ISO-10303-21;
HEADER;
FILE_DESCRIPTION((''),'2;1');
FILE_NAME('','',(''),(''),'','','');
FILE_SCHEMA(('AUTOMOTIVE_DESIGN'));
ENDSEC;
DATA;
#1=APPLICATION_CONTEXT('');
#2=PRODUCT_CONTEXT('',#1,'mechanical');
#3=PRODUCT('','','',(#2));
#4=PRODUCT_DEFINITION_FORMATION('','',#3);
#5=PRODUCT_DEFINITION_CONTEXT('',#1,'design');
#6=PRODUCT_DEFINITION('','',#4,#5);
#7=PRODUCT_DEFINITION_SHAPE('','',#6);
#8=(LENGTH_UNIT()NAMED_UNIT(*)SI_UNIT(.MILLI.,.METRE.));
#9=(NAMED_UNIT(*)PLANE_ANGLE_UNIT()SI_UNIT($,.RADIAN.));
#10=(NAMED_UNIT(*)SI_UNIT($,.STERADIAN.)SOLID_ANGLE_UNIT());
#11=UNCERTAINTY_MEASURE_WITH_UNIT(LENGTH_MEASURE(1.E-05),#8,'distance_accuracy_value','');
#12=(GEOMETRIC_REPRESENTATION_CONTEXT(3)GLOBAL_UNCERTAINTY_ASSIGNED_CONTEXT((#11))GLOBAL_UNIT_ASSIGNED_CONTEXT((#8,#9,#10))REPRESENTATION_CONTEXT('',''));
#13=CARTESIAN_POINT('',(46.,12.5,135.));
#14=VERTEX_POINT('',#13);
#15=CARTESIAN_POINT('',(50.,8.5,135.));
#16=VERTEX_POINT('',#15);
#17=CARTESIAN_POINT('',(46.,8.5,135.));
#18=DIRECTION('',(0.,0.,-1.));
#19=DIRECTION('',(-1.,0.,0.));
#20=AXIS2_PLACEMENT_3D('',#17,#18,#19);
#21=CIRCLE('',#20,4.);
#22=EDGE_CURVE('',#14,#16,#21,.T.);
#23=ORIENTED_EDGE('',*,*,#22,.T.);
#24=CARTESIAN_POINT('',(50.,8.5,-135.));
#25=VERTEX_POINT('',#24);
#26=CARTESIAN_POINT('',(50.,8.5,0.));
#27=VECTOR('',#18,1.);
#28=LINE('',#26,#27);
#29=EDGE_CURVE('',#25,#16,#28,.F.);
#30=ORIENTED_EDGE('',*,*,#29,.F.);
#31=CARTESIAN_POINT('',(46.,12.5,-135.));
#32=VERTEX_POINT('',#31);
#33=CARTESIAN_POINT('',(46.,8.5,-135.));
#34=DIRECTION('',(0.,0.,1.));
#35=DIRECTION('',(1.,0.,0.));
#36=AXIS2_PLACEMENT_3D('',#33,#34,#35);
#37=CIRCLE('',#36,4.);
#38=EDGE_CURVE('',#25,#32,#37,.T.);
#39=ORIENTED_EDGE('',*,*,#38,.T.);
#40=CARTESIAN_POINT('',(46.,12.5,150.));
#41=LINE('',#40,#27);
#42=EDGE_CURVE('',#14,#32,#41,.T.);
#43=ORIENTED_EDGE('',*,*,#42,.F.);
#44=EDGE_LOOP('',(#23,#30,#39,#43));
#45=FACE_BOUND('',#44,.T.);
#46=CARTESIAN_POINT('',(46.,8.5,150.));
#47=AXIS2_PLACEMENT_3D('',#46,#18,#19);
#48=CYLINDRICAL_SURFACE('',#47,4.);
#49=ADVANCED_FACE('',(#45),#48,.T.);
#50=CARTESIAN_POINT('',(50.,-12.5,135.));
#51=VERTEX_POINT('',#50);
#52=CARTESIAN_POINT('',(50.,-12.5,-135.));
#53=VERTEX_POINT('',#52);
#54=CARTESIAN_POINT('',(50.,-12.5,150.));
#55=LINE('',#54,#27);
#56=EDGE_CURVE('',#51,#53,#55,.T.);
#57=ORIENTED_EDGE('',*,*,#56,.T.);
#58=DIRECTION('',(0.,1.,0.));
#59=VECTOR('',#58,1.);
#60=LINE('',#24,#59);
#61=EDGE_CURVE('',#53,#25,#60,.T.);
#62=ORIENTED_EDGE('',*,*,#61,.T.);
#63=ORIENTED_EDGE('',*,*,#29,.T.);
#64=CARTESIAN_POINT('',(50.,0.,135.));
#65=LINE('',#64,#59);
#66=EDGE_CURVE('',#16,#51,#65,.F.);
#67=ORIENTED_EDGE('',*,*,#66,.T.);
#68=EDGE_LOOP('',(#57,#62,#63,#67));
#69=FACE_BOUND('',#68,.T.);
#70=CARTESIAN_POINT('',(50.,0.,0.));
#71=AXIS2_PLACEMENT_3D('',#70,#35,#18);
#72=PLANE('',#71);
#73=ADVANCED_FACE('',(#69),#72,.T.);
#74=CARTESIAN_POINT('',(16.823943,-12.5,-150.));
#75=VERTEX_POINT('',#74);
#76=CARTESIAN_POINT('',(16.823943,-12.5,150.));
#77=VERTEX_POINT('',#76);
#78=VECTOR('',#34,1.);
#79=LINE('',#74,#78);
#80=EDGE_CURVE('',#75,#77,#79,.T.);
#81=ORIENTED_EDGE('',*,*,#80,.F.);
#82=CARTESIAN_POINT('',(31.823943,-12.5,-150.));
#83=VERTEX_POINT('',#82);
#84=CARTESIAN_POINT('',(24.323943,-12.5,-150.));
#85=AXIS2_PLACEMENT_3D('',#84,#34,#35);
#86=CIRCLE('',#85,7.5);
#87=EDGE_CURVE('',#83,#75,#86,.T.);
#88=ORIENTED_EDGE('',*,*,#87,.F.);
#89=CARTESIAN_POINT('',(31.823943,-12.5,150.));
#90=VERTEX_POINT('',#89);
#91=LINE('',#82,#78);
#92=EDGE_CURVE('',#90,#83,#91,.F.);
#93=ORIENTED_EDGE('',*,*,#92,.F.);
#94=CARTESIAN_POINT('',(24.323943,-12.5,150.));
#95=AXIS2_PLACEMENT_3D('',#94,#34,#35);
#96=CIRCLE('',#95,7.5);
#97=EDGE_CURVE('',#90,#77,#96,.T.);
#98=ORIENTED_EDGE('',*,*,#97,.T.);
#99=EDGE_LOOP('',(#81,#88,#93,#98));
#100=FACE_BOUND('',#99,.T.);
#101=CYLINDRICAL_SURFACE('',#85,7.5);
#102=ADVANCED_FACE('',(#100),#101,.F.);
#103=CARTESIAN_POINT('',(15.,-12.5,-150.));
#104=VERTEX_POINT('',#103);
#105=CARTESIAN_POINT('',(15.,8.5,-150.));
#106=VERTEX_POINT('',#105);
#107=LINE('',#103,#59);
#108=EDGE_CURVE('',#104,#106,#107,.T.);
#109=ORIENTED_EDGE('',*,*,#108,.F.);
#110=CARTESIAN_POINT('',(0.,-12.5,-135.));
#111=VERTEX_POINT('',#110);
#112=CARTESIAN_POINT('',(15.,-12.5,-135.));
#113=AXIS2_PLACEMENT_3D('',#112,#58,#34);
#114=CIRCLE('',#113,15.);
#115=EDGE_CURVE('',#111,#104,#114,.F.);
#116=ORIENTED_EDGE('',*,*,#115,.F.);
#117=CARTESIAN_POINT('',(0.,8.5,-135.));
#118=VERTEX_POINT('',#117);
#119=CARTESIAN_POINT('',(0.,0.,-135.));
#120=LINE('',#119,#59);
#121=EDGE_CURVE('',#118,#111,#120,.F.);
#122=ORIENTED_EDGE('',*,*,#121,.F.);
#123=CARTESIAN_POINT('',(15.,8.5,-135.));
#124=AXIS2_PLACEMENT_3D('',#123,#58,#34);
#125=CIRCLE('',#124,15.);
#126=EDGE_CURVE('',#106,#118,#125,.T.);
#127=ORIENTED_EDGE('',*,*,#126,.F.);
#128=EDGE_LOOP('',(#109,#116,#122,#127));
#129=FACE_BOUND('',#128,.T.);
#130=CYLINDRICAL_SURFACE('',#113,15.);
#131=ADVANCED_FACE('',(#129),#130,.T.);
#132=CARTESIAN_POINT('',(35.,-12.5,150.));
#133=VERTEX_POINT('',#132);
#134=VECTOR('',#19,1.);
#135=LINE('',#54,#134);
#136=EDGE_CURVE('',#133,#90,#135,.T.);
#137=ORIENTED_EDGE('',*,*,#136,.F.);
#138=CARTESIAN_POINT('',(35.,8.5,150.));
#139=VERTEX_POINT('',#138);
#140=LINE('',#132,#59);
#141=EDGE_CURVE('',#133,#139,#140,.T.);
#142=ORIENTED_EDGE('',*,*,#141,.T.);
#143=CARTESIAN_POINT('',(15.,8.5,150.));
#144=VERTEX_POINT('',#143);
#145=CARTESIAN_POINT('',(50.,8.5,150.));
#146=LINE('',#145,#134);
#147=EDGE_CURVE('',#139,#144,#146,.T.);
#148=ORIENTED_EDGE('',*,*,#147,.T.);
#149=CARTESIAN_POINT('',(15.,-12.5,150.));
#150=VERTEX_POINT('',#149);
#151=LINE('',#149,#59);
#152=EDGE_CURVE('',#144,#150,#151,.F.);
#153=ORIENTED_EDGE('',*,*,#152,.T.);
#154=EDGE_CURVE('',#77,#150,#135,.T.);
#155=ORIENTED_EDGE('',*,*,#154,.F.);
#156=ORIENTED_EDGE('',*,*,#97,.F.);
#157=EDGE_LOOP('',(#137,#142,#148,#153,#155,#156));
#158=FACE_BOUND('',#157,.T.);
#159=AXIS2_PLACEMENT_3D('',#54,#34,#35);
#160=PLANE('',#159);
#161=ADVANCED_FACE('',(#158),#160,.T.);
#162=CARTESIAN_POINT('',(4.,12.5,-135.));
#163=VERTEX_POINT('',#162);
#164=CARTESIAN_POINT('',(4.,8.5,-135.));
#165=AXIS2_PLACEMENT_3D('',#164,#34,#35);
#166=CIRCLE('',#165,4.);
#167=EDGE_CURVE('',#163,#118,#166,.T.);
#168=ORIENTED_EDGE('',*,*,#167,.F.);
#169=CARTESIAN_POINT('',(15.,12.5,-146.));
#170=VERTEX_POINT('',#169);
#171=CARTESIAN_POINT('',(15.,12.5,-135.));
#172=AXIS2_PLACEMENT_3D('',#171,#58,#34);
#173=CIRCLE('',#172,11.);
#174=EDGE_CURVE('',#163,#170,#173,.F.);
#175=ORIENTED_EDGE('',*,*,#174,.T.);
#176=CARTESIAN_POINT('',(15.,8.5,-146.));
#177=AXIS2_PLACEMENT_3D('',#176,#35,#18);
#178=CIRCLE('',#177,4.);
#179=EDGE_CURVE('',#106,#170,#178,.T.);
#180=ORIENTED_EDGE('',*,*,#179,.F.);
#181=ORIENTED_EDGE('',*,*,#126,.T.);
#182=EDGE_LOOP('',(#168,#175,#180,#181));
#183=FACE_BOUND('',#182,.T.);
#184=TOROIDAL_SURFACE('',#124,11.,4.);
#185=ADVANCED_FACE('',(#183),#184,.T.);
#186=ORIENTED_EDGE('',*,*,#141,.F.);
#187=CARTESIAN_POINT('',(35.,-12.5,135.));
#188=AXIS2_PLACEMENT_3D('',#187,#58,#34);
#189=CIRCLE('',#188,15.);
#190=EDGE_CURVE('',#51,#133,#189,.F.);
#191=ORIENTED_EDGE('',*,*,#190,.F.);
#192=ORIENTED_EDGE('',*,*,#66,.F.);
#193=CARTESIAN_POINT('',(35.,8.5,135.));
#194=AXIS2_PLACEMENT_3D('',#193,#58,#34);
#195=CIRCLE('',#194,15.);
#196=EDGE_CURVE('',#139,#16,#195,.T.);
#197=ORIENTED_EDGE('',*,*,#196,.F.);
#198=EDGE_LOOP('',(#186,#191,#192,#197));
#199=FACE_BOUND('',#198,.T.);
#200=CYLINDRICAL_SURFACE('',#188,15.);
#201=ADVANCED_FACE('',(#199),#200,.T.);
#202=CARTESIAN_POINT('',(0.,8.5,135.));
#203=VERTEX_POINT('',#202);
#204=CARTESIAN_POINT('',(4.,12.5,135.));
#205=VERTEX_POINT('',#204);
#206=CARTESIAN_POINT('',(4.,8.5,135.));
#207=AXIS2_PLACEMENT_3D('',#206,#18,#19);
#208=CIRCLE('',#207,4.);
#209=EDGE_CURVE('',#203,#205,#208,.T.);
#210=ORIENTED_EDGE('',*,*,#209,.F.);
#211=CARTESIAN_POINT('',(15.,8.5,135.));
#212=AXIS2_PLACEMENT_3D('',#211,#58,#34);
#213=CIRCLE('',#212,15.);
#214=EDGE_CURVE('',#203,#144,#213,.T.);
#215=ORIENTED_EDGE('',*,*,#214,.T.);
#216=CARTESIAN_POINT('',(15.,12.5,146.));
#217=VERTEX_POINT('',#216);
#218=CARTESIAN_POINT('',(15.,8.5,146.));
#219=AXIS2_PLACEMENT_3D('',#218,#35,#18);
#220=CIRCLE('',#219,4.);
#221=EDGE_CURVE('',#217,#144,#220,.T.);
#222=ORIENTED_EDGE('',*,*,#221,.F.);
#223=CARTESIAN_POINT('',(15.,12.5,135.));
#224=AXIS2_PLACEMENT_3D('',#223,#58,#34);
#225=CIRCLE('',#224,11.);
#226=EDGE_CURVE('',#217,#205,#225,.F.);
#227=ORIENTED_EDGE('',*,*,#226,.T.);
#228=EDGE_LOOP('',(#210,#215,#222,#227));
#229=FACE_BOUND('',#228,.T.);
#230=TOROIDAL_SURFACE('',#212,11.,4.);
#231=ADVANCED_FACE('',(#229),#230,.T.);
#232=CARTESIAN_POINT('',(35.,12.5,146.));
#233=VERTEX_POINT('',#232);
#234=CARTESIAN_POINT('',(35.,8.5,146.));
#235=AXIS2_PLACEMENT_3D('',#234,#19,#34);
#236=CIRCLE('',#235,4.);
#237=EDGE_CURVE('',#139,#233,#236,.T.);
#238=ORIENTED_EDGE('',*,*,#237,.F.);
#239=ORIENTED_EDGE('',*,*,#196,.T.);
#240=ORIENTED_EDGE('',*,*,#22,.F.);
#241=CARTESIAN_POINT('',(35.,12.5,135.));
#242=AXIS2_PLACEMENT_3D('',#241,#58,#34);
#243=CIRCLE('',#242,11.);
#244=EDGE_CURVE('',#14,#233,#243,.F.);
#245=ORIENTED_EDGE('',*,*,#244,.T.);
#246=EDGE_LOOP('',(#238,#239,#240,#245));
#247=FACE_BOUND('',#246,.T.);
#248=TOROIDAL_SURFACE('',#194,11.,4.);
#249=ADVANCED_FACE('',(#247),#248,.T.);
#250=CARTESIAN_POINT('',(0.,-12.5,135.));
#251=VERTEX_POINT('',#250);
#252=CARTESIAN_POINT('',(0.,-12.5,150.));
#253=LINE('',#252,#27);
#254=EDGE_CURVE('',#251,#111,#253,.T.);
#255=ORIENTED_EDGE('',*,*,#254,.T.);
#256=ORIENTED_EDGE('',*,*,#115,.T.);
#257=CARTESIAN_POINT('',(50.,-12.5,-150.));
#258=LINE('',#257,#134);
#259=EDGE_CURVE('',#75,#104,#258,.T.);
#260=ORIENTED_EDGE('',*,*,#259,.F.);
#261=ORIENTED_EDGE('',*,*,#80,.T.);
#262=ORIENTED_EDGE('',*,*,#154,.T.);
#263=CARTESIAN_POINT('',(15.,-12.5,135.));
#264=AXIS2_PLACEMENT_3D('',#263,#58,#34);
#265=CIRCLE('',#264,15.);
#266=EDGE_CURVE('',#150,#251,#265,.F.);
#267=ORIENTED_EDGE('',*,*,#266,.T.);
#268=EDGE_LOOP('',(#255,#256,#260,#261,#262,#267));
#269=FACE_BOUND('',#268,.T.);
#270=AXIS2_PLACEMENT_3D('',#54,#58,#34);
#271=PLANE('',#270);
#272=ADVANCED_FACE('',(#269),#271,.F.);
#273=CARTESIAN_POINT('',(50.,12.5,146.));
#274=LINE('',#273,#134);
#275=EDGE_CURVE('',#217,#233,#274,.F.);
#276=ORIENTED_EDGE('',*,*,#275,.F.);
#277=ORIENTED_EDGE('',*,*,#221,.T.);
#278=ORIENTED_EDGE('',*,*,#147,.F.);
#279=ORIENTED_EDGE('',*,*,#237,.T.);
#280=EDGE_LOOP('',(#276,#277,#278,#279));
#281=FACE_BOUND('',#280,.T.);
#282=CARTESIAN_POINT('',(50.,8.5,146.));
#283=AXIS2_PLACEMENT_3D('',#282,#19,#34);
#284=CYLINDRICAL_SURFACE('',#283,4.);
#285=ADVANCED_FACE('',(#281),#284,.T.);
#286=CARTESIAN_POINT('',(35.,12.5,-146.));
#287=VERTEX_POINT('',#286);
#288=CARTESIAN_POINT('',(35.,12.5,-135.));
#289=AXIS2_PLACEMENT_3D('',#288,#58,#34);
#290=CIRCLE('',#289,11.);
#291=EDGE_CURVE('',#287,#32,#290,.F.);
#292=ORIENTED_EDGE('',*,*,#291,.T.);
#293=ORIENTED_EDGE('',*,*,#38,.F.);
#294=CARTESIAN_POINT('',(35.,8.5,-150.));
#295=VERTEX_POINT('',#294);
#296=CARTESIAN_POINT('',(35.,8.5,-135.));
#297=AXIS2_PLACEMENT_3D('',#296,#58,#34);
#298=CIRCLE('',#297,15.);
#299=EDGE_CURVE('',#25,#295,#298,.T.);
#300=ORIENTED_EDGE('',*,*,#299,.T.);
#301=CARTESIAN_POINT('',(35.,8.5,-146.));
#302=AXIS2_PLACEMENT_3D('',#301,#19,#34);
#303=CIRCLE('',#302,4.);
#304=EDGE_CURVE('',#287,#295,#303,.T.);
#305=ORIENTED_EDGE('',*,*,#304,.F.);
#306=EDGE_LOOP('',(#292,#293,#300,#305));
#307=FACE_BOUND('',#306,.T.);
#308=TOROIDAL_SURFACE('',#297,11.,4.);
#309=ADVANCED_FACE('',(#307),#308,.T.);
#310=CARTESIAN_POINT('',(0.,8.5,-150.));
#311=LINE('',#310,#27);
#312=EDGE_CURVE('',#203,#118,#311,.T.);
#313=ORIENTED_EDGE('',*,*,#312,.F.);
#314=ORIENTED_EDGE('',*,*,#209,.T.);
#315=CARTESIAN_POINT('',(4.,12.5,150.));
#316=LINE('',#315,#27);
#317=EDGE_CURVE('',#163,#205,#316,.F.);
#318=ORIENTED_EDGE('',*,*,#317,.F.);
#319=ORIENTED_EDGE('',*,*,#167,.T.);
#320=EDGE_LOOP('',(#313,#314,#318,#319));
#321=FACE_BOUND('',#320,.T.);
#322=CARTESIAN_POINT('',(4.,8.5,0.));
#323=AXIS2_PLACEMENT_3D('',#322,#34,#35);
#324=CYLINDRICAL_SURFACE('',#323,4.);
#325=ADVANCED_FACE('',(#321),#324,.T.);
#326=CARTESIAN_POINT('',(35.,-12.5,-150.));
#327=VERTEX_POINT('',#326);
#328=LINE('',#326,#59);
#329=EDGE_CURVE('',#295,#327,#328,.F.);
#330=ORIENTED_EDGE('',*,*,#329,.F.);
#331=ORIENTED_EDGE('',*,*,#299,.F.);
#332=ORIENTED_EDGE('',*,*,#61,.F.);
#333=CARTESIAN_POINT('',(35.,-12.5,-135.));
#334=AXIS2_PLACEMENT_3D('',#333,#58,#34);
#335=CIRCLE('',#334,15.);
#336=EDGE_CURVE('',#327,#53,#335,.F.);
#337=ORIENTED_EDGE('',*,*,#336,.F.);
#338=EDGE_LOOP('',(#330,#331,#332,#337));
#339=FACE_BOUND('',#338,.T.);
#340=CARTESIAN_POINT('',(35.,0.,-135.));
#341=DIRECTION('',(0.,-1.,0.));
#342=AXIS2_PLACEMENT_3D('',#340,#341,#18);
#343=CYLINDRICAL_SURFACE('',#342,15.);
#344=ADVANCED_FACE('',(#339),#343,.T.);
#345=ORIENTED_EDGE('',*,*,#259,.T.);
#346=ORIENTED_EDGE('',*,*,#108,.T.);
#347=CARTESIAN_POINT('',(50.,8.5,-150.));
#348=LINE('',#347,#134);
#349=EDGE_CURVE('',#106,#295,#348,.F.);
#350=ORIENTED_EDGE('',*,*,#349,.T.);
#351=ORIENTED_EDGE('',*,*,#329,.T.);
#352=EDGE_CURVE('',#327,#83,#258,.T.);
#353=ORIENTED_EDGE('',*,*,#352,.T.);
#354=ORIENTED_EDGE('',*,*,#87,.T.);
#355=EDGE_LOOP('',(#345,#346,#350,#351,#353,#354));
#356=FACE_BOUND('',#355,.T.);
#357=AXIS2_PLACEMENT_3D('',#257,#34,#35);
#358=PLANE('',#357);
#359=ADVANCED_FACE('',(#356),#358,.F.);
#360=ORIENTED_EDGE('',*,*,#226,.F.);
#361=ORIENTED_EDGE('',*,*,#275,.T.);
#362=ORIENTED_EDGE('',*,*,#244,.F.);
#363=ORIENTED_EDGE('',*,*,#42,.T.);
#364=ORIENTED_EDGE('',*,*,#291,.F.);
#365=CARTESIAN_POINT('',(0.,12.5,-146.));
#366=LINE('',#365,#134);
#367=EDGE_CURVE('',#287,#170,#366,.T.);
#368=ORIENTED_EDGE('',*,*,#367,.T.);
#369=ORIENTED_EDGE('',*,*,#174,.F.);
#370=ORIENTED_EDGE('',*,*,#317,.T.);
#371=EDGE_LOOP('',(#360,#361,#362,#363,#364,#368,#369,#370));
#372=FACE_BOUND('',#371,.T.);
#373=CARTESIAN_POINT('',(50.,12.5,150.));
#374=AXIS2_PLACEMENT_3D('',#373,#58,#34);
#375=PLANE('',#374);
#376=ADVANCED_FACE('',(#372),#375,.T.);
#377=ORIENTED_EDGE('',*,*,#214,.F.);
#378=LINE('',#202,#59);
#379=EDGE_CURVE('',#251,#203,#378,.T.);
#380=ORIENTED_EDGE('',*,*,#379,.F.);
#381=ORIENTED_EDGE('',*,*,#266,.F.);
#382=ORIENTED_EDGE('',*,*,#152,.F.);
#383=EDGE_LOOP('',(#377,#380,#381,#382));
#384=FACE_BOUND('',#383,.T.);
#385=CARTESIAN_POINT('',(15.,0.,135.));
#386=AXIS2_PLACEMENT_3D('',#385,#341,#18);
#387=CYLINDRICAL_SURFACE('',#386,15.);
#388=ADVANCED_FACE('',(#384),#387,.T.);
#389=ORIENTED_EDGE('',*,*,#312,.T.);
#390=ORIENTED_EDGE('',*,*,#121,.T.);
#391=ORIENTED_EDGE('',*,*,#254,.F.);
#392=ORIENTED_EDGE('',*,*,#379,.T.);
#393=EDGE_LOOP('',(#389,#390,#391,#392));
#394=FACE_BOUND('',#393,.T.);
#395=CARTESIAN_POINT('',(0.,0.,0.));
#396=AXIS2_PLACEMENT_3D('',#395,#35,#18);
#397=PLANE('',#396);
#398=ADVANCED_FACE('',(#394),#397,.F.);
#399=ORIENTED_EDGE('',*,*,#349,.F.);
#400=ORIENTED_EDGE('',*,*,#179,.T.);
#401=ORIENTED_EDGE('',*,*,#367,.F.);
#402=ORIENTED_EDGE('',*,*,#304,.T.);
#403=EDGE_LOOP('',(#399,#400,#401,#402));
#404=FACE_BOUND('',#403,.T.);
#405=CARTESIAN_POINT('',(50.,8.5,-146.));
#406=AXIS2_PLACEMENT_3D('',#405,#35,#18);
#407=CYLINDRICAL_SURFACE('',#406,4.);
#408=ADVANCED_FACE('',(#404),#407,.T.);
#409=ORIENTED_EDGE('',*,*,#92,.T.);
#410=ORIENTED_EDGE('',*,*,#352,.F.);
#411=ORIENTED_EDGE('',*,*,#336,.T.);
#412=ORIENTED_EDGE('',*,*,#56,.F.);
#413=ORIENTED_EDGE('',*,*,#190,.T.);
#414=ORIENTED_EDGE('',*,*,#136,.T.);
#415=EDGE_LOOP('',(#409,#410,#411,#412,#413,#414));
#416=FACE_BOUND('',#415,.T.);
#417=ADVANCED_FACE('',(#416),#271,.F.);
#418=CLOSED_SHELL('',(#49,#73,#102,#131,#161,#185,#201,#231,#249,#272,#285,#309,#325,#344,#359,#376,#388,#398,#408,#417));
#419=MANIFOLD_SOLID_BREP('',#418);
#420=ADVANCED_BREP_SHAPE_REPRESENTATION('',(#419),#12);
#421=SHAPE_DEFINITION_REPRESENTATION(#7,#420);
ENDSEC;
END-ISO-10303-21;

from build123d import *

# Parameters (mm, degrees)
ESBO_O1_W                  = 300
ESBO_O1_H                  = 25
RESSALTO_EXTRUS_O1_DEPTH   = 50
FILETE1_R                  = 4
FILETE2_R                  = 15
CORTE_EXTRUS_O2_DEPTH      = 159.607219382
CORTE_EXTRUS_O2_DEPTH_BACK = 159.607219382
ESBO_O8_R                  = 7.5


with BuildPart() as part:
    # Esboço1 → Ressalto-extrusão1 (new body)
    with BuildSketch(Plane(origin=(0, 0, 0), x_dir=(0, 0, -1), z_dir=(1, 0, 0))):
        Rectangle(ESBO_O1_W, ESBO_O1_H)
    extrude(amount=RESSALTO_EXTRUS_O1_DEPTH)

    # Filete1
    filete1_edges = [part.edges().sort_by_distance(p)[0] for p in [
        (50, 12.5, 0),
        (0, 12.5, 0),
        (25, 12.5, 150),
        (25, 12.5, -150),
    ]]
    fillet(filete1_edges, radius=FILETE1_R)

    # Filete2
    # the kernel refuses this fillet: 15 mm, written as the material it takes off along each edge
    with BuildSketch(Plane(origin=(35, 12.5, 135), x_dir=(0, 0, 1), z_dir=(-1, 0, 0))) as filete2_piece_1:
        with BuildLine():
            CenterArc((11, -4), 4, 0, 90)
            Line((15, -4), (15, 0))
            Line((15, 0), (11, 0))
        make_face()
    revolve(axis=Axis((35, 12.5, 135), (0, 1, 0)), revolution_arc=90, mode=Mode.SUBTRACT)
    with BuildSketch(Plane(origin=(15, 12.5, 135), x_dir=(-1, 0, 0), z_dir=(0, 0, -1))) as filete2_piece_2:
        with BuildLine():
            CenterArc((11, -4), 4, 0, 90)
            Line((15, -4), (15, 0))
            Line((15, 0), (11, 0))
        make_face()
    revolve(axis=Axis((15, 12.5, 135), (0, 1, 0)), revolution_arc=90, mode=Mode.SUBTRACT)
    with BuildSketch(Plane(origin=(35, 12.5, -135), x_dir=(1, 0, 0), z_dir=(0, 0, 1))) as filete2_piece_3:
        with BuildLine():
            CenterArc((11, -4), 4, 0, 90)
            Line((15, -4), (15, 0))
            Line((15, 0), (11, 0))
        make_face()
    revolve(axis=Axis((35, 12.5, -135), (0, 1, 0)), revolution_arc=90, mode=Mode.SUBTRACT)
    with BuildSketch(Plane(origin=(15, 12.5, -135), x_dir=(0, 0, -1), z_dir=(1, 0, 0))) as filete2_piece_4:
        with BuildLine():
            CenterArc((11, -4), 4, 0, 90)
            Line((15, -4), (15, 0))
            Line((15, 0), (11, 0))
        make_face()
    revolve(axis=Axis((15, 12.5, -135), (0, 1, 0)), revolution_arc=90, mode=Mode.SUBTRACT)
    with BuildSketch(Plane(origin=(50, 12.5, 150), x_dir=(0, 0, -1), z_dir=(0, -1, 0)), Plane(origin=(0, -50, -150), x_dir=(1, 0, 0), z_dir=(0, 1, 0))) as filete2_piece_5:
        with BuildLine():
            CenterArc((FILETE2_R, -FILETE2_R), FILETE2_R, 90, 90)
            Line((0, -FILETE2_R), (0, 0))
            Line((0, 0), (FILETE2_R, 0))
        make_face()
    extrude(amount=62.5, mode=Mode.SUBTRACT)
    with BuildSketch(Plane(origin=(0, 12.5, 150), x_dir=(0, 0, -1), z_dir=(0, -1, 0)), Plane(origin=(50, -50, -150), x_dir=(-1, 0, 0), z_dir=(0, 1, 0))) as filete2_piece_6:
        with BuildLine():
            CenterArc((FILETE2_R, FILETE2_R), FILETE2_R, 180, 90)
            Line((0, FILETE2_R), (0, 0))
            Line((0, 0), (FILETE2_R, 0))
        make_face()
    extrude(amount=62.5, mode=Mode.SUBTRACT)

    # Esboço8 → Corte-extrusão2 (cut, two sides: drawn at the far end of the back side and taken through both)
    with BuildSketch(Plane.XY.offset(-CORTE_EXTRUS_O2_DEPTH_BACK)):
        with Locations((24.323943137, -12.5)):
            Circle(ESBO_O8_R)
    extrude(amount=CORTE_EXTRUS_O2_DEPTH + CORTE_EXTRUS_O2_DEPTH_BACK, mode=Mode.SUBTRACT)


solid = part.part
